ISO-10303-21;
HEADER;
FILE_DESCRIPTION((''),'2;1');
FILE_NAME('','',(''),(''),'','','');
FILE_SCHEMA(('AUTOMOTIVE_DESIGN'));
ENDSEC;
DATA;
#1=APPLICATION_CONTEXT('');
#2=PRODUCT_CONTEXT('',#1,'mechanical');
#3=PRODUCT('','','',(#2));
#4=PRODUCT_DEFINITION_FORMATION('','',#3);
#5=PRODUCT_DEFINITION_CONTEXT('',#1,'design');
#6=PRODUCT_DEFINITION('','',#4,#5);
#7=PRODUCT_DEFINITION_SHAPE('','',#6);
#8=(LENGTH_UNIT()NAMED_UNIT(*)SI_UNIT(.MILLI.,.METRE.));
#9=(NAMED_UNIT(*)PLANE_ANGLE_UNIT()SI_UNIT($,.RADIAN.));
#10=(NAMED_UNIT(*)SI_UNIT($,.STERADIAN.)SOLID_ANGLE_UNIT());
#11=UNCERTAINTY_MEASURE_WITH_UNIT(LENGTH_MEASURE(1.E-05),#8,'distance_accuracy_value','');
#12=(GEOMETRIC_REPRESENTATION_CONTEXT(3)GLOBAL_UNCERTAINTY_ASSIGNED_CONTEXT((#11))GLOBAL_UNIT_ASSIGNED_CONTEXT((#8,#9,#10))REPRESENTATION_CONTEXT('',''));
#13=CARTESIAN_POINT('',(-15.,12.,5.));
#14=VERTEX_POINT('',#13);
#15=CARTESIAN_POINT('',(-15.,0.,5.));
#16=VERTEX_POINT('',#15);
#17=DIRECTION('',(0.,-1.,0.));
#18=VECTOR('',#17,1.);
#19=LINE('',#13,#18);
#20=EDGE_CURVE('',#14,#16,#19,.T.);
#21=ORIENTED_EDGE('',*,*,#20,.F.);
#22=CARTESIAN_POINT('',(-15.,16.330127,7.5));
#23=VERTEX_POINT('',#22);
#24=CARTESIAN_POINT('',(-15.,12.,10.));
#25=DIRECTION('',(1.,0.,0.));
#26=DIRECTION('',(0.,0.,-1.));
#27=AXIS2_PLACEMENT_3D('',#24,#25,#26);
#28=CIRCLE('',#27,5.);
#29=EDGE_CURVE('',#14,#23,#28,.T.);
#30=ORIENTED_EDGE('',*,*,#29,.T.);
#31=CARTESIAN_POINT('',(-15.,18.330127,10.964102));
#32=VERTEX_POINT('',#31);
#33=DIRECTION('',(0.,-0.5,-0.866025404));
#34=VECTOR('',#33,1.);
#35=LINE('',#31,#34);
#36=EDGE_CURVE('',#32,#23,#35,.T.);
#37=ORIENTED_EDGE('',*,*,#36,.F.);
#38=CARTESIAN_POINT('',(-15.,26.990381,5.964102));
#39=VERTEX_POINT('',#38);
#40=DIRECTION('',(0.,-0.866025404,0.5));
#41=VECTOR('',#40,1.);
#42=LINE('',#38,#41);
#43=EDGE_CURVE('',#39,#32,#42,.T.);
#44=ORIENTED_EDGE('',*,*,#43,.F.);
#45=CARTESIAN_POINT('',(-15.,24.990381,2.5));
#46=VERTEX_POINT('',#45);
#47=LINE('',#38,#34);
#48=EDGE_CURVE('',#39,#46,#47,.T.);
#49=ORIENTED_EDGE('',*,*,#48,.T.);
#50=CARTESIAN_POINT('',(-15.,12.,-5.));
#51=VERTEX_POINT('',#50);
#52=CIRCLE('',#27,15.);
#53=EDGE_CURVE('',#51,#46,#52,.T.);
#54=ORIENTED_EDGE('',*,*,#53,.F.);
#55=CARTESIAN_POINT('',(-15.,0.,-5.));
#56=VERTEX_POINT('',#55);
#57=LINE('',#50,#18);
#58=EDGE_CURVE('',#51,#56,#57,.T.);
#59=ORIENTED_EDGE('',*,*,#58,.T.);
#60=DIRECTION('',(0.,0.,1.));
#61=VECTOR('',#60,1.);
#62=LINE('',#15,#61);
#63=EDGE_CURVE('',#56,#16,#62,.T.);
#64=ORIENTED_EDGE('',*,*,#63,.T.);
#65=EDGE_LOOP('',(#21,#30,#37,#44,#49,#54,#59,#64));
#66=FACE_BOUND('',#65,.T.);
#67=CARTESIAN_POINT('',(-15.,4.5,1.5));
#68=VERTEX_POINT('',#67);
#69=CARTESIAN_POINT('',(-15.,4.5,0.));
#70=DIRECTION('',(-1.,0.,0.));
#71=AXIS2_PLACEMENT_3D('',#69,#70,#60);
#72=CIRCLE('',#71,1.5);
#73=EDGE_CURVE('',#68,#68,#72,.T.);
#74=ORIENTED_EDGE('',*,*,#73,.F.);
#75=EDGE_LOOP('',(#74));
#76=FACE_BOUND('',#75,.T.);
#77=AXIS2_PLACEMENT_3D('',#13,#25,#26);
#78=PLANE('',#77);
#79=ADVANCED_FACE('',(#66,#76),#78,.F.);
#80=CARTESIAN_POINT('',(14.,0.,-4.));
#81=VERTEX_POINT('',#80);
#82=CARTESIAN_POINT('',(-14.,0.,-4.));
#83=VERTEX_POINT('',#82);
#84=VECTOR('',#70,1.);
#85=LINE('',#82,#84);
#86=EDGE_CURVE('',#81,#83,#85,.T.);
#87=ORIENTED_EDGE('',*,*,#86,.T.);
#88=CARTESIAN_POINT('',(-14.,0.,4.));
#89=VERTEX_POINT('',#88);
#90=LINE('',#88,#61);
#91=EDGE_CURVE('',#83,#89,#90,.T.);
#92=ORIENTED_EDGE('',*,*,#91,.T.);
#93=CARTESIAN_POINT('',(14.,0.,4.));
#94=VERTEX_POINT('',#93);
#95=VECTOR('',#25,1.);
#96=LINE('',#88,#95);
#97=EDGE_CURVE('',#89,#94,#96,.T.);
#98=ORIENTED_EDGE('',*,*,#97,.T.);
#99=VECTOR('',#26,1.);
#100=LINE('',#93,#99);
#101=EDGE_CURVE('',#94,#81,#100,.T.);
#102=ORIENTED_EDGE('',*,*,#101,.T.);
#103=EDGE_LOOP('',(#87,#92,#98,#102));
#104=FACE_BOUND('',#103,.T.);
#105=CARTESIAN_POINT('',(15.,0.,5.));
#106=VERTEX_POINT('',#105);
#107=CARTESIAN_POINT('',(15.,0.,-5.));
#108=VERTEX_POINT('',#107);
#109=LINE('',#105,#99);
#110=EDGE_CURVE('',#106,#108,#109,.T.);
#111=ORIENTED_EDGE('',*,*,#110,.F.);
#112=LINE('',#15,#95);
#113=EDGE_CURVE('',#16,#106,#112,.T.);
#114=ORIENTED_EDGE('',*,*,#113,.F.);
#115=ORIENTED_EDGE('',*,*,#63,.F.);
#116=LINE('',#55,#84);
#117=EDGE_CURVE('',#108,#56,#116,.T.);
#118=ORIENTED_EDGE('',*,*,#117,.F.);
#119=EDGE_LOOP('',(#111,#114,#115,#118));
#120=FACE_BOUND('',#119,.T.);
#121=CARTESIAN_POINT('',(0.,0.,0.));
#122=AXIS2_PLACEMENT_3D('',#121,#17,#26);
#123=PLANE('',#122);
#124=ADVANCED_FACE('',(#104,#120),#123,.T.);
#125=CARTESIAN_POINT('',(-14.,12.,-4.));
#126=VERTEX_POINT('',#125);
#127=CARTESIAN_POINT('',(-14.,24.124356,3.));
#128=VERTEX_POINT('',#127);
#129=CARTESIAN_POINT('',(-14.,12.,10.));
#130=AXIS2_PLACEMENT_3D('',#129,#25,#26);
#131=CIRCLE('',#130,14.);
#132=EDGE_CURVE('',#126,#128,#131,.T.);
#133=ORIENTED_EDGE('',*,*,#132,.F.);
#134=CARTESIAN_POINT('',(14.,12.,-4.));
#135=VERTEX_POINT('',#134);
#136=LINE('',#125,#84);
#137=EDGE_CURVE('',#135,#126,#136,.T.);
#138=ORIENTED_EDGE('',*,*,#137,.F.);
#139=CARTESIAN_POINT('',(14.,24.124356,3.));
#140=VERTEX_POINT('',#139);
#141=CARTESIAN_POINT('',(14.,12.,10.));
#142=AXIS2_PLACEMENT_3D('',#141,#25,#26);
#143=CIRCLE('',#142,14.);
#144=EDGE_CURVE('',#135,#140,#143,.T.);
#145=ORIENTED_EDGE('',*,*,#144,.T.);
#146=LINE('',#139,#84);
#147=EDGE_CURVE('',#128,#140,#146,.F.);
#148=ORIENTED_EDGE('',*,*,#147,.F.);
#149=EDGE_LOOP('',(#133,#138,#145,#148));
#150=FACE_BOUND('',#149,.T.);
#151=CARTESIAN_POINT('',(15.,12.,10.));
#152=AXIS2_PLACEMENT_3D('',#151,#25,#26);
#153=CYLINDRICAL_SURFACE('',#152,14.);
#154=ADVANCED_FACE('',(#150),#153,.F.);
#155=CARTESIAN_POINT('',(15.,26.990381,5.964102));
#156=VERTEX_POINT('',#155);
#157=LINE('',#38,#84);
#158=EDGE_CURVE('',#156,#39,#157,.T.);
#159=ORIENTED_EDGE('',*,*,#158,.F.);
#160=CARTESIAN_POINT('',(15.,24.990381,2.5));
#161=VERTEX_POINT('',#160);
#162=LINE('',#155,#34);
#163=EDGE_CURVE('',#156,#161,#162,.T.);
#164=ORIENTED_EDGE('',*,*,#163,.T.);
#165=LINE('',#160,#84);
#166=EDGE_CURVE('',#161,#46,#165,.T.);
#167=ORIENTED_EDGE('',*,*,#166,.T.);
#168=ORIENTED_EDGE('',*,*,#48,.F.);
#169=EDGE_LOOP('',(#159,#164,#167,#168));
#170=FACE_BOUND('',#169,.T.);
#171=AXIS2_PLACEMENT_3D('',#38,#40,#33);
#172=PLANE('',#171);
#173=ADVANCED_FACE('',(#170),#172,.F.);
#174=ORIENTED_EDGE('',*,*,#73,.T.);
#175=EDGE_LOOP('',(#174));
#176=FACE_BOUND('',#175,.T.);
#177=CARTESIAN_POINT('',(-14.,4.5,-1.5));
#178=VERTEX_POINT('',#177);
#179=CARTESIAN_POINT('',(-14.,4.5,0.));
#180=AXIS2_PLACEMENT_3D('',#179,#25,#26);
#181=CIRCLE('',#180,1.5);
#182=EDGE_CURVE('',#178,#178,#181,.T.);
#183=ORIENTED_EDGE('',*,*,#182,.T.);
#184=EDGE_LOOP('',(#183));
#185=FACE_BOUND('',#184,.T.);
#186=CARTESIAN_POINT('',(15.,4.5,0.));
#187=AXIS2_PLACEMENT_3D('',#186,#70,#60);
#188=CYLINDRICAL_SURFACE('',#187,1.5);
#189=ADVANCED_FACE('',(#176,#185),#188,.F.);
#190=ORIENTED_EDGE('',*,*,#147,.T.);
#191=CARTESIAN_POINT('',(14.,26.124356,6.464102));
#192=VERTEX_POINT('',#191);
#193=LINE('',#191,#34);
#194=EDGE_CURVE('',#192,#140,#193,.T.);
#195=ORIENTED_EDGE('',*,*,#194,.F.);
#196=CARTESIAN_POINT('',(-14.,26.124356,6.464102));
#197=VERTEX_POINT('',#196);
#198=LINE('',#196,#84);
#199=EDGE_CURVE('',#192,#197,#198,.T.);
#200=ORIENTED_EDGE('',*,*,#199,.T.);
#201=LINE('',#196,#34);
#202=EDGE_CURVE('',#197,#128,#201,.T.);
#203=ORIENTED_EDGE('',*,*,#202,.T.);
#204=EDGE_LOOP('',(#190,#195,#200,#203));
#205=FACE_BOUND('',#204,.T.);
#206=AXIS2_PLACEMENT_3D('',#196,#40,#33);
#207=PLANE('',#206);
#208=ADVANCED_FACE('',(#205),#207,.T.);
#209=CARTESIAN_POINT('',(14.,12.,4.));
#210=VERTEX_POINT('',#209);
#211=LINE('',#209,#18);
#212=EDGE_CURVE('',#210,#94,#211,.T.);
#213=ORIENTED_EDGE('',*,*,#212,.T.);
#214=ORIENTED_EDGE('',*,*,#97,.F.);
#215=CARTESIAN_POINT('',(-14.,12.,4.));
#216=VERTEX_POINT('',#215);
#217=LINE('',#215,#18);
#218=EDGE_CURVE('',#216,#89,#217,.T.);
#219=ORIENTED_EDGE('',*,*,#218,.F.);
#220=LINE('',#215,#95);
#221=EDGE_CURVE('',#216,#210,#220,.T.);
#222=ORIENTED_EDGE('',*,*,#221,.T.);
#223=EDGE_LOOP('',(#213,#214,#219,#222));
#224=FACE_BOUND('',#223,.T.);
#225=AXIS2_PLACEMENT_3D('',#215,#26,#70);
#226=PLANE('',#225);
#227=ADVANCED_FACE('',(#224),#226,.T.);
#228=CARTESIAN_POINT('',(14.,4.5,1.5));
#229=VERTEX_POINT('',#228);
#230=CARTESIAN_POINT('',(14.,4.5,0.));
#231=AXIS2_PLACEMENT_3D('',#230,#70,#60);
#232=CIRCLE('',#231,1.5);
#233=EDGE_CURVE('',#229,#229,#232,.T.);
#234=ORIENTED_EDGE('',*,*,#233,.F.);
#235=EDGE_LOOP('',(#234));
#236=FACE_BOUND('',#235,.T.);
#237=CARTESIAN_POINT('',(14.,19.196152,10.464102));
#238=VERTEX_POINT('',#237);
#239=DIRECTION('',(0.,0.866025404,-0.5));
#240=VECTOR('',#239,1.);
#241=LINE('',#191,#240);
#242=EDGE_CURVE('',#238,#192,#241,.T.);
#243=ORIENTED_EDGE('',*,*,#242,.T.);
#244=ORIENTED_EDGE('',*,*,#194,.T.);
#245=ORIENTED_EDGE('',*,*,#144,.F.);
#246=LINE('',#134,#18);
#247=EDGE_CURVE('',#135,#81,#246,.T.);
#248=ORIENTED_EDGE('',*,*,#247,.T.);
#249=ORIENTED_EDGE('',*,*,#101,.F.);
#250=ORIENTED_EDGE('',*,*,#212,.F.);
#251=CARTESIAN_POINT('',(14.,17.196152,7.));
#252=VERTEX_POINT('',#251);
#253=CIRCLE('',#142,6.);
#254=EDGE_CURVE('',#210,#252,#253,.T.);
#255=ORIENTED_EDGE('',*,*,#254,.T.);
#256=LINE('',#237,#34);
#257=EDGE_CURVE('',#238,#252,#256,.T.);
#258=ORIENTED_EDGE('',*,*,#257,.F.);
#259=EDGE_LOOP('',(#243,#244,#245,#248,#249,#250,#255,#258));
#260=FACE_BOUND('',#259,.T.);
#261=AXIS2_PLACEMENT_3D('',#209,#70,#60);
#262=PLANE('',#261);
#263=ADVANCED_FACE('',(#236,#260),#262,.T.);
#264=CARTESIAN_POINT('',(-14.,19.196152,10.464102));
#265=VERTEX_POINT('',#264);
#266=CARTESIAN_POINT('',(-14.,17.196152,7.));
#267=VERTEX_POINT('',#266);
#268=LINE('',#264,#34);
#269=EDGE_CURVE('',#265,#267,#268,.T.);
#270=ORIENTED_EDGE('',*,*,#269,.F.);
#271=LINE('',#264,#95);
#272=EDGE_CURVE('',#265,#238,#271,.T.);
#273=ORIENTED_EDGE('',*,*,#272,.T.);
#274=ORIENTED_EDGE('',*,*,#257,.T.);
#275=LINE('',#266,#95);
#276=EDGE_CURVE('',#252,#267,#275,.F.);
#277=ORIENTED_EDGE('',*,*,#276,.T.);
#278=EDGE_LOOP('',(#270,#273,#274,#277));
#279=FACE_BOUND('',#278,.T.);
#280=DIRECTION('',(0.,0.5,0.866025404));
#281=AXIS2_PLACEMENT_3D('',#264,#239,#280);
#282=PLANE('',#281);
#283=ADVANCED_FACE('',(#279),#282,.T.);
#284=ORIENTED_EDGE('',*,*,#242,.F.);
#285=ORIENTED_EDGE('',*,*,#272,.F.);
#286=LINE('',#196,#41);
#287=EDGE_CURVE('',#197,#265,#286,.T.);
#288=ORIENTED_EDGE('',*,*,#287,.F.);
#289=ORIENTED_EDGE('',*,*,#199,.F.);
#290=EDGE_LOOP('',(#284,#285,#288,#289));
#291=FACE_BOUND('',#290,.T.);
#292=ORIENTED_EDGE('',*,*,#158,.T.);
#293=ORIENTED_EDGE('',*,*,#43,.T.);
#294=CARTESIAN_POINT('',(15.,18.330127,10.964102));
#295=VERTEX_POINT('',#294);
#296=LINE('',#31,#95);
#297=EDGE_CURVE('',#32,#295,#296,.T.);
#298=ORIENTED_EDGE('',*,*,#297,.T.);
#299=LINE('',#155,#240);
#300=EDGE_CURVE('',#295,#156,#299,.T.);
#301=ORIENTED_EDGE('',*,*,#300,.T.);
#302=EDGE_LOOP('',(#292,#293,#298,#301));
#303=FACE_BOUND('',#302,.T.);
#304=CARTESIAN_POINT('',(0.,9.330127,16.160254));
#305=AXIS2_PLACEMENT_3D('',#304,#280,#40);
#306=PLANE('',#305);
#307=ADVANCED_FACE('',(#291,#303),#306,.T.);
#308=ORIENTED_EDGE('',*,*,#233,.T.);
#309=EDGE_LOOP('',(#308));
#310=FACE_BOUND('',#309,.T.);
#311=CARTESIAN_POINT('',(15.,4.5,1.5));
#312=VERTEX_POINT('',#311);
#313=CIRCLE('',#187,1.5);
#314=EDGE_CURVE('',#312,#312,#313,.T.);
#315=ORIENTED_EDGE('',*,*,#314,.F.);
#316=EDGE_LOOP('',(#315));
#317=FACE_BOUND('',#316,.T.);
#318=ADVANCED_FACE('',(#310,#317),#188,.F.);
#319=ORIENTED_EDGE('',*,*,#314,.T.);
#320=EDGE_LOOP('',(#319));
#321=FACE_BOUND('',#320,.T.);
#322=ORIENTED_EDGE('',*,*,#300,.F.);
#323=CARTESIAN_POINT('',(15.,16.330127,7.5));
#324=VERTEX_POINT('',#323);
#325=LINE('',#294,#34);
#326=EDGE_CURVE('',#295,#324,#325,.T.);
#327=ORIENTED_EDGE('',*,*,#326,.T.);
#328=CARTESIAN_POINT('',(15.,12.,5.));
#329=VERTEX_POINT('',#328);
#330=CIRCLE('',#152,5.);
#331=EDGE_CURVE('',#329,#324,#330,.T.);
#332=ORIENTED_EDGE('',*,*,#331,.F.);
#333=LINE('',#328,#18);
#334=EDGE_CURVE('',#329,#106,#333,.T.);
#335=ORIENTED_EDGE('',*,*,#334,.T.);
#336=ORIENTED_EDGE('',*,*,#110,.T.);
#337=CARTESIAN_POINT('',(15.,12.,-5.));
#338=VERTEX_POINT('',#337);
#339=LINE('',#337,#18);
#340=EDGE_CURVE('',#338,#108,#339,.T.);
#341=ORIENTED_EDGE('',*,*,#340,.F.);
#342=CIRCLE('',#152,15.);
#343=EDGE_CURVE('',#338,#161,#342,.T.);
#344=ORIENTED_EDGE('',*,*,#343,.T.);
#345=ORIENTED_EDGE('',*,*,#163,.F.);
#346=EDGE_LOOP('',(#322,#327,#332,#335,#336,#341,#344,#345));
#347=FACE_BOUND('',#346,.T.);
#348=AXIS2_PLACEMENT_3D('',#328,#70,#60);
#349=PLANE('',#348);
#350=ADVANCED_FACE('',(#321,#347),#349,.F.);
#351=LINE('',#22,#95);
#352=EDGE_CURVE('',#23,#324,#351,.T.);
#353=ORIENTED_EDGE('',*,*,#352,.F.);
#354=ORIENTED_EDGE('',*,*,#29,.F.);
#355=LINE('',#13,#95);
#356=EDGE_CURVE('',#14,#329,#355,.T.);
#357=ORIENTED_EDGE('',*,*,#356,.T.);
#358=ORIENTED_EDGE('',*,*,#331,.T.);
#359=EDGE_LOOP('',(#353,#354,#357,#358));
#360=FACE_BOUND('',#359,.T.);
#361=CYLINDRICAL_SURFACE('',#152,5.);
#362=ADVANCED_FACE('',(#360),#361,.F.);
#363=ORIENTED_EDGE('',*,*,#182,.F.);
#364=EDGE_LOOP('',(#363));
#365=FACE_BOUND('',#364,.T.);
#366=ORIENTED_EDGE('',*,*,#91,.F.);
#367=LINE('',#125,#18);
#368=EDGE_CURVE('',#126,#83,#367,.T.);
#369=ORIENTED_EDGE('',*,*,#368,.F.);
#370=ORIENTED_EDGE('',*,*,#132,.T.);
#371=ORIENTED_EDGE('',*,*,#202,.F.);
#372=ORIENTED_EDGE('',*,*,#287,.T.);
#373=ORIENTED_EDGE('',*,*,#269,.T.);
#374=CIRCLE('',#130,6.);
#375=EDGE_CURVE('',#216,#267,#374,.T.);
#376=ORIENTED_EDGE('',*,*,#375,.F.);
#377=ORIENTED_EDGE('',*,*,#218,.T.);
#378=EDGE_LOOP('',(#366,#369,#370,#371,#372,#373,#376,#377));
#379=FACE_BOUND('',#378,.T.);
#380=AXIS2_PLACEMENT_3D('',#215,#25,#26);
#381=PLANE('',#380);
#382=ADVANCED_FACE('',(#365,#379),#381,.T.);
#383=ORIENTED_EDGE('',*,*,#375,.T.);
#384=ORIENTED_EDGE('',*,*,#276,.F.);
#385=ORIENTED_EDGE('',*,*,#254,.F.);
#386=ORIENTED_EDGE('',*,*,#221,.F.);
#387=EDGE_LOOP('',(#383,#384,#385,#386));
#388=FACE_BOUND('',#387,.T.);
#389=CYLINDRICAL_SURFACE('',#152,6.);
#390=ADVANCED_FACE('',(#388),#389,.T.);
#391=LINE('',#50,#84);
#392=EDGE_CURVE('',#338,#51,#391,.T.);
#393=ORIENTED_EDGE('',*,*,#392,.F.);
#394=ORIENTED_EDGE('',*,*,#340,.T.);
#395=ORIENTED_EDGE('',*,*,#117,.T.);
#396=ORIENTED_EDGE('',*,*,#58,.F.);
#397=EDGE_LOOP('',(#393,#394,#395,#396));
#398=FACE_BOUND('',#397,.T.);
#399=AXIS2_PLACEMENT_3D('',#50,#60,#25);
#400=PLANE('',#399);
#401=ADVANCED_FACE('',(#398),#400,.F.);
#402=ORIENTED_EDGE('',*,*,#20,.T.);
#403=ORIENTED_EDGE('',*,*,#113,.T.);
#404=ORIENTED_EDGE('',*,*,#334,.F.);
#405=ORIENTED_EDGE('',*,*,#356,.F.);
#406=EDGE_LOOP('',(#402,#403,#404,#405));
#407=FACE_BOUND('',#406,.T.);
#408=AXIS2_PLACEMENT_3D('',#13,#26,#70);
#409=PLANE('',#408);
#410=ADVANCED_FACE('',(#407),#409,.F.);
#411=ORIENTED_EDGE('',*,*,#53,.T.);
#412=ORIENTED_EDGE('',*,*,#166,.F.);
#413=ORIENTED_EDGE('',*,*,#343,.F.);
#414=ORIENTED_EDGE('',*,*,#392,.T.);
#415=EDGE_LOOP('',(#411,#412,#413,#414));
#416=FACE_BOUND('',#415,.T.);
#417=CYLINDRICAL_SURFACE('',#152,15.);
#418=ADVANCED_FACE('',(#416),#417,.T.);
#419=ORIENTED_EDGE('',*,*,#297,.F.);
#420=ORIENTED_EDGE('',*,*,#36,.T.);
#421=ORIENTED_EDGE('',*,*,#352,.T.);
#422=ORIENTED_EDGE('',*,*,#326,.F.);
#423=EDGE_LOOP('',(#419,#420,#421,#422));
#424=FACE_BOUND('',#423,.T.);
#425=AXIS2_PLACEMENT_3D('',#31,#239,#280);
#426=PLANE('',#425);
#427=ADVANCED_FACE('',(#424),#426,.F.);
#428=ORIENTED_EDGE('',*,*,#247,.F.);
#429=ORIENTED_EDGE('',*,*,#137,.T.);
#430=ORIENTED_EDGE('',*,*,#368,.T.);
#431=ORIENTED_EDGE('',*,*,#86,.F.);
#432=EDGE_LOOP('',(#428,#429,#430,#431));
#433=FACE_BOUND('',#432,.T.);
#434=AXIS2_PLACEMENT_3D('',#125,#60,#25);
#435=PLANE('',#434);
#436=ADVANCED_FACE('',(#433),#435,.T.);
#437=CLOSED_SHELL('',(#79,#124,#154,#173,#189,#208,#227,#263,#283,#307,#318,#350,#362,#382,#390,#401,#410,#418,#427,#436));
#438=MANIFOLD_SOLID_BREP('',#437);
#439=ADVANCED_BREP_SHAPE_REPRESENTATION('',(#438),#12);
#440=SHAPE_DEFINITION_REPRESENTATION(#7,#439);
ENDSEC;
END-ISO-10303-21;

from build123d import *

# Parameters (mm, degrees)
SKETCH1_W           = 30
SKETCH1_H           = 10
SKETCH1_W_2         = 28
SKETCH1_H_2         = 8
BOSS_EXTRUDE1_DEPTH = 12
SWEEP1_START        = -15
SWEEP1_DEPTH        = 30
SWEEP1_2_DEPTH      = 1
SWEEP1_START_2      = 14
SWEEP1_3_DEPTH      = 1
SKETCH4_W           = 30
SKETCH4_H           = 10
SKETCH4_W_2         = 28
SKETCH4_H_2         = 8
BOSS_EXTRUDE2_DEPTH = 4
SKETCH7_R           = 1.5
CUT_EXTRUDE1_DEPTH  = 42.817367132


# Read off the part's stored shape, not the designer's step: Sweep1
with BuildPart() as part:
    # Sketch1 → Boss-Extrude1 (new body)
    with BuildSketch(Plane(origin=(0, 0, 0), x_dir=(1, 0, 0), z_dir=(0, 1, 0))):
        Rectangle(SKETCH1_W, SKETCH1_H)
        Rectangle(SKETCH1_W_2, SKETCH1_H_2, mode=Mode.SUBTRACT)
    extrude(amount=BOSS_EXTRUDE1_DEPTH)

    # Sweep1 outline → Sweep1 (add)
    with BuildSketch(Plane.YZ.offset(SWEEP1_START)):
        with BuildLine():
            ThreePointArc((16.330127019, 7.5), (14.5, 5.669872981), (12, 5))
            Line((12, 5), (12, 4))
            ThreePointArc((12, 4), (15, 4.803847577), (17.196152423, 7))
            Line((17.196152423, 7), (16.330127019, 7.5))
        make_face()
        with BuildLine():
            ThreePointArc((24.124355653, 3), (19, -2.124355653), (12, -4))
            Line((12, -4), (12, -5))
            ThreePointArc((12, -5), (19.5, -2.990381057), (24.990381057, 2.5))
            Line((24.990381057, 2.5), (24.124355653, 3))
        make_face()
    extrude(amount=SWEEP1_DEPTH)

    # Sweep1 2 outline → Sweep1 2 (add)
    with BuildSketch(Plane.YZ.offset(SWEEP1_START)):
        with BuildLine():
            ThreePointArc((17.196152423, 7), (15, 4.803847577), (12, 4))
            Line((12, 4), (12, -4))
            ThreePointArc((12, -4), (19, -2.124355653), (24.124355653, 3))
            Line((24.124355653, 3), (17.196152423, 7))
        make_face()
    extrude(amount=SWEEP1_2_DEPTH)

    # Sweep1 3 outline → Sweep1 3 (add)
    with BuildSketch(Plane.YZ.offset(SWEEP1_START_2)):
        with BuildLine():
            ThreePointArc((17.196152423, 7), (15, 4.803847577), (12, 4))
            Line((12, 4), (12, -4))
            ThreePointArc((12, -4), (19, -2.124355653), (24.124355653, 3))
            Line((24.124355653, 3), (17.196152423, 7))
        make_face()
    extrude(amount=SWEEP1_3_DEPTH)

    # Sketch4 → Boss-Extrude2 (add)
    with BuildSketch(Plane(origin=(0, 7.330127019, 12.696152423), x_dir=(1, 0, 0), z_dir=(0, 0.4999999999999947, 0.8660254037844418))):
        with Locations((0, 15.392304845)):
            Rectangle(SKETCH4_W, SKETCH4_H)
        with Locations((0, 15.392304845)):
            Rectangle(SKETCH4_W_2, SKETCH4_H_2, mode=Mode.SUBTRACT)
    extrude(amount=BOSS_EXTRUDE2_DEPTH)

    # Sketch7 → Cut-Extrude1 (cut, through all)
    with BuildSketch(Plane.ZY.offset(15)):
        with Locations((0, 4.5)):
            Circle(SKETCH7_R)
    extrude(amount=-CUT_EXTRUDE1_DEPTH, mode=Mode.SUBTRACT)


solid = part.part
